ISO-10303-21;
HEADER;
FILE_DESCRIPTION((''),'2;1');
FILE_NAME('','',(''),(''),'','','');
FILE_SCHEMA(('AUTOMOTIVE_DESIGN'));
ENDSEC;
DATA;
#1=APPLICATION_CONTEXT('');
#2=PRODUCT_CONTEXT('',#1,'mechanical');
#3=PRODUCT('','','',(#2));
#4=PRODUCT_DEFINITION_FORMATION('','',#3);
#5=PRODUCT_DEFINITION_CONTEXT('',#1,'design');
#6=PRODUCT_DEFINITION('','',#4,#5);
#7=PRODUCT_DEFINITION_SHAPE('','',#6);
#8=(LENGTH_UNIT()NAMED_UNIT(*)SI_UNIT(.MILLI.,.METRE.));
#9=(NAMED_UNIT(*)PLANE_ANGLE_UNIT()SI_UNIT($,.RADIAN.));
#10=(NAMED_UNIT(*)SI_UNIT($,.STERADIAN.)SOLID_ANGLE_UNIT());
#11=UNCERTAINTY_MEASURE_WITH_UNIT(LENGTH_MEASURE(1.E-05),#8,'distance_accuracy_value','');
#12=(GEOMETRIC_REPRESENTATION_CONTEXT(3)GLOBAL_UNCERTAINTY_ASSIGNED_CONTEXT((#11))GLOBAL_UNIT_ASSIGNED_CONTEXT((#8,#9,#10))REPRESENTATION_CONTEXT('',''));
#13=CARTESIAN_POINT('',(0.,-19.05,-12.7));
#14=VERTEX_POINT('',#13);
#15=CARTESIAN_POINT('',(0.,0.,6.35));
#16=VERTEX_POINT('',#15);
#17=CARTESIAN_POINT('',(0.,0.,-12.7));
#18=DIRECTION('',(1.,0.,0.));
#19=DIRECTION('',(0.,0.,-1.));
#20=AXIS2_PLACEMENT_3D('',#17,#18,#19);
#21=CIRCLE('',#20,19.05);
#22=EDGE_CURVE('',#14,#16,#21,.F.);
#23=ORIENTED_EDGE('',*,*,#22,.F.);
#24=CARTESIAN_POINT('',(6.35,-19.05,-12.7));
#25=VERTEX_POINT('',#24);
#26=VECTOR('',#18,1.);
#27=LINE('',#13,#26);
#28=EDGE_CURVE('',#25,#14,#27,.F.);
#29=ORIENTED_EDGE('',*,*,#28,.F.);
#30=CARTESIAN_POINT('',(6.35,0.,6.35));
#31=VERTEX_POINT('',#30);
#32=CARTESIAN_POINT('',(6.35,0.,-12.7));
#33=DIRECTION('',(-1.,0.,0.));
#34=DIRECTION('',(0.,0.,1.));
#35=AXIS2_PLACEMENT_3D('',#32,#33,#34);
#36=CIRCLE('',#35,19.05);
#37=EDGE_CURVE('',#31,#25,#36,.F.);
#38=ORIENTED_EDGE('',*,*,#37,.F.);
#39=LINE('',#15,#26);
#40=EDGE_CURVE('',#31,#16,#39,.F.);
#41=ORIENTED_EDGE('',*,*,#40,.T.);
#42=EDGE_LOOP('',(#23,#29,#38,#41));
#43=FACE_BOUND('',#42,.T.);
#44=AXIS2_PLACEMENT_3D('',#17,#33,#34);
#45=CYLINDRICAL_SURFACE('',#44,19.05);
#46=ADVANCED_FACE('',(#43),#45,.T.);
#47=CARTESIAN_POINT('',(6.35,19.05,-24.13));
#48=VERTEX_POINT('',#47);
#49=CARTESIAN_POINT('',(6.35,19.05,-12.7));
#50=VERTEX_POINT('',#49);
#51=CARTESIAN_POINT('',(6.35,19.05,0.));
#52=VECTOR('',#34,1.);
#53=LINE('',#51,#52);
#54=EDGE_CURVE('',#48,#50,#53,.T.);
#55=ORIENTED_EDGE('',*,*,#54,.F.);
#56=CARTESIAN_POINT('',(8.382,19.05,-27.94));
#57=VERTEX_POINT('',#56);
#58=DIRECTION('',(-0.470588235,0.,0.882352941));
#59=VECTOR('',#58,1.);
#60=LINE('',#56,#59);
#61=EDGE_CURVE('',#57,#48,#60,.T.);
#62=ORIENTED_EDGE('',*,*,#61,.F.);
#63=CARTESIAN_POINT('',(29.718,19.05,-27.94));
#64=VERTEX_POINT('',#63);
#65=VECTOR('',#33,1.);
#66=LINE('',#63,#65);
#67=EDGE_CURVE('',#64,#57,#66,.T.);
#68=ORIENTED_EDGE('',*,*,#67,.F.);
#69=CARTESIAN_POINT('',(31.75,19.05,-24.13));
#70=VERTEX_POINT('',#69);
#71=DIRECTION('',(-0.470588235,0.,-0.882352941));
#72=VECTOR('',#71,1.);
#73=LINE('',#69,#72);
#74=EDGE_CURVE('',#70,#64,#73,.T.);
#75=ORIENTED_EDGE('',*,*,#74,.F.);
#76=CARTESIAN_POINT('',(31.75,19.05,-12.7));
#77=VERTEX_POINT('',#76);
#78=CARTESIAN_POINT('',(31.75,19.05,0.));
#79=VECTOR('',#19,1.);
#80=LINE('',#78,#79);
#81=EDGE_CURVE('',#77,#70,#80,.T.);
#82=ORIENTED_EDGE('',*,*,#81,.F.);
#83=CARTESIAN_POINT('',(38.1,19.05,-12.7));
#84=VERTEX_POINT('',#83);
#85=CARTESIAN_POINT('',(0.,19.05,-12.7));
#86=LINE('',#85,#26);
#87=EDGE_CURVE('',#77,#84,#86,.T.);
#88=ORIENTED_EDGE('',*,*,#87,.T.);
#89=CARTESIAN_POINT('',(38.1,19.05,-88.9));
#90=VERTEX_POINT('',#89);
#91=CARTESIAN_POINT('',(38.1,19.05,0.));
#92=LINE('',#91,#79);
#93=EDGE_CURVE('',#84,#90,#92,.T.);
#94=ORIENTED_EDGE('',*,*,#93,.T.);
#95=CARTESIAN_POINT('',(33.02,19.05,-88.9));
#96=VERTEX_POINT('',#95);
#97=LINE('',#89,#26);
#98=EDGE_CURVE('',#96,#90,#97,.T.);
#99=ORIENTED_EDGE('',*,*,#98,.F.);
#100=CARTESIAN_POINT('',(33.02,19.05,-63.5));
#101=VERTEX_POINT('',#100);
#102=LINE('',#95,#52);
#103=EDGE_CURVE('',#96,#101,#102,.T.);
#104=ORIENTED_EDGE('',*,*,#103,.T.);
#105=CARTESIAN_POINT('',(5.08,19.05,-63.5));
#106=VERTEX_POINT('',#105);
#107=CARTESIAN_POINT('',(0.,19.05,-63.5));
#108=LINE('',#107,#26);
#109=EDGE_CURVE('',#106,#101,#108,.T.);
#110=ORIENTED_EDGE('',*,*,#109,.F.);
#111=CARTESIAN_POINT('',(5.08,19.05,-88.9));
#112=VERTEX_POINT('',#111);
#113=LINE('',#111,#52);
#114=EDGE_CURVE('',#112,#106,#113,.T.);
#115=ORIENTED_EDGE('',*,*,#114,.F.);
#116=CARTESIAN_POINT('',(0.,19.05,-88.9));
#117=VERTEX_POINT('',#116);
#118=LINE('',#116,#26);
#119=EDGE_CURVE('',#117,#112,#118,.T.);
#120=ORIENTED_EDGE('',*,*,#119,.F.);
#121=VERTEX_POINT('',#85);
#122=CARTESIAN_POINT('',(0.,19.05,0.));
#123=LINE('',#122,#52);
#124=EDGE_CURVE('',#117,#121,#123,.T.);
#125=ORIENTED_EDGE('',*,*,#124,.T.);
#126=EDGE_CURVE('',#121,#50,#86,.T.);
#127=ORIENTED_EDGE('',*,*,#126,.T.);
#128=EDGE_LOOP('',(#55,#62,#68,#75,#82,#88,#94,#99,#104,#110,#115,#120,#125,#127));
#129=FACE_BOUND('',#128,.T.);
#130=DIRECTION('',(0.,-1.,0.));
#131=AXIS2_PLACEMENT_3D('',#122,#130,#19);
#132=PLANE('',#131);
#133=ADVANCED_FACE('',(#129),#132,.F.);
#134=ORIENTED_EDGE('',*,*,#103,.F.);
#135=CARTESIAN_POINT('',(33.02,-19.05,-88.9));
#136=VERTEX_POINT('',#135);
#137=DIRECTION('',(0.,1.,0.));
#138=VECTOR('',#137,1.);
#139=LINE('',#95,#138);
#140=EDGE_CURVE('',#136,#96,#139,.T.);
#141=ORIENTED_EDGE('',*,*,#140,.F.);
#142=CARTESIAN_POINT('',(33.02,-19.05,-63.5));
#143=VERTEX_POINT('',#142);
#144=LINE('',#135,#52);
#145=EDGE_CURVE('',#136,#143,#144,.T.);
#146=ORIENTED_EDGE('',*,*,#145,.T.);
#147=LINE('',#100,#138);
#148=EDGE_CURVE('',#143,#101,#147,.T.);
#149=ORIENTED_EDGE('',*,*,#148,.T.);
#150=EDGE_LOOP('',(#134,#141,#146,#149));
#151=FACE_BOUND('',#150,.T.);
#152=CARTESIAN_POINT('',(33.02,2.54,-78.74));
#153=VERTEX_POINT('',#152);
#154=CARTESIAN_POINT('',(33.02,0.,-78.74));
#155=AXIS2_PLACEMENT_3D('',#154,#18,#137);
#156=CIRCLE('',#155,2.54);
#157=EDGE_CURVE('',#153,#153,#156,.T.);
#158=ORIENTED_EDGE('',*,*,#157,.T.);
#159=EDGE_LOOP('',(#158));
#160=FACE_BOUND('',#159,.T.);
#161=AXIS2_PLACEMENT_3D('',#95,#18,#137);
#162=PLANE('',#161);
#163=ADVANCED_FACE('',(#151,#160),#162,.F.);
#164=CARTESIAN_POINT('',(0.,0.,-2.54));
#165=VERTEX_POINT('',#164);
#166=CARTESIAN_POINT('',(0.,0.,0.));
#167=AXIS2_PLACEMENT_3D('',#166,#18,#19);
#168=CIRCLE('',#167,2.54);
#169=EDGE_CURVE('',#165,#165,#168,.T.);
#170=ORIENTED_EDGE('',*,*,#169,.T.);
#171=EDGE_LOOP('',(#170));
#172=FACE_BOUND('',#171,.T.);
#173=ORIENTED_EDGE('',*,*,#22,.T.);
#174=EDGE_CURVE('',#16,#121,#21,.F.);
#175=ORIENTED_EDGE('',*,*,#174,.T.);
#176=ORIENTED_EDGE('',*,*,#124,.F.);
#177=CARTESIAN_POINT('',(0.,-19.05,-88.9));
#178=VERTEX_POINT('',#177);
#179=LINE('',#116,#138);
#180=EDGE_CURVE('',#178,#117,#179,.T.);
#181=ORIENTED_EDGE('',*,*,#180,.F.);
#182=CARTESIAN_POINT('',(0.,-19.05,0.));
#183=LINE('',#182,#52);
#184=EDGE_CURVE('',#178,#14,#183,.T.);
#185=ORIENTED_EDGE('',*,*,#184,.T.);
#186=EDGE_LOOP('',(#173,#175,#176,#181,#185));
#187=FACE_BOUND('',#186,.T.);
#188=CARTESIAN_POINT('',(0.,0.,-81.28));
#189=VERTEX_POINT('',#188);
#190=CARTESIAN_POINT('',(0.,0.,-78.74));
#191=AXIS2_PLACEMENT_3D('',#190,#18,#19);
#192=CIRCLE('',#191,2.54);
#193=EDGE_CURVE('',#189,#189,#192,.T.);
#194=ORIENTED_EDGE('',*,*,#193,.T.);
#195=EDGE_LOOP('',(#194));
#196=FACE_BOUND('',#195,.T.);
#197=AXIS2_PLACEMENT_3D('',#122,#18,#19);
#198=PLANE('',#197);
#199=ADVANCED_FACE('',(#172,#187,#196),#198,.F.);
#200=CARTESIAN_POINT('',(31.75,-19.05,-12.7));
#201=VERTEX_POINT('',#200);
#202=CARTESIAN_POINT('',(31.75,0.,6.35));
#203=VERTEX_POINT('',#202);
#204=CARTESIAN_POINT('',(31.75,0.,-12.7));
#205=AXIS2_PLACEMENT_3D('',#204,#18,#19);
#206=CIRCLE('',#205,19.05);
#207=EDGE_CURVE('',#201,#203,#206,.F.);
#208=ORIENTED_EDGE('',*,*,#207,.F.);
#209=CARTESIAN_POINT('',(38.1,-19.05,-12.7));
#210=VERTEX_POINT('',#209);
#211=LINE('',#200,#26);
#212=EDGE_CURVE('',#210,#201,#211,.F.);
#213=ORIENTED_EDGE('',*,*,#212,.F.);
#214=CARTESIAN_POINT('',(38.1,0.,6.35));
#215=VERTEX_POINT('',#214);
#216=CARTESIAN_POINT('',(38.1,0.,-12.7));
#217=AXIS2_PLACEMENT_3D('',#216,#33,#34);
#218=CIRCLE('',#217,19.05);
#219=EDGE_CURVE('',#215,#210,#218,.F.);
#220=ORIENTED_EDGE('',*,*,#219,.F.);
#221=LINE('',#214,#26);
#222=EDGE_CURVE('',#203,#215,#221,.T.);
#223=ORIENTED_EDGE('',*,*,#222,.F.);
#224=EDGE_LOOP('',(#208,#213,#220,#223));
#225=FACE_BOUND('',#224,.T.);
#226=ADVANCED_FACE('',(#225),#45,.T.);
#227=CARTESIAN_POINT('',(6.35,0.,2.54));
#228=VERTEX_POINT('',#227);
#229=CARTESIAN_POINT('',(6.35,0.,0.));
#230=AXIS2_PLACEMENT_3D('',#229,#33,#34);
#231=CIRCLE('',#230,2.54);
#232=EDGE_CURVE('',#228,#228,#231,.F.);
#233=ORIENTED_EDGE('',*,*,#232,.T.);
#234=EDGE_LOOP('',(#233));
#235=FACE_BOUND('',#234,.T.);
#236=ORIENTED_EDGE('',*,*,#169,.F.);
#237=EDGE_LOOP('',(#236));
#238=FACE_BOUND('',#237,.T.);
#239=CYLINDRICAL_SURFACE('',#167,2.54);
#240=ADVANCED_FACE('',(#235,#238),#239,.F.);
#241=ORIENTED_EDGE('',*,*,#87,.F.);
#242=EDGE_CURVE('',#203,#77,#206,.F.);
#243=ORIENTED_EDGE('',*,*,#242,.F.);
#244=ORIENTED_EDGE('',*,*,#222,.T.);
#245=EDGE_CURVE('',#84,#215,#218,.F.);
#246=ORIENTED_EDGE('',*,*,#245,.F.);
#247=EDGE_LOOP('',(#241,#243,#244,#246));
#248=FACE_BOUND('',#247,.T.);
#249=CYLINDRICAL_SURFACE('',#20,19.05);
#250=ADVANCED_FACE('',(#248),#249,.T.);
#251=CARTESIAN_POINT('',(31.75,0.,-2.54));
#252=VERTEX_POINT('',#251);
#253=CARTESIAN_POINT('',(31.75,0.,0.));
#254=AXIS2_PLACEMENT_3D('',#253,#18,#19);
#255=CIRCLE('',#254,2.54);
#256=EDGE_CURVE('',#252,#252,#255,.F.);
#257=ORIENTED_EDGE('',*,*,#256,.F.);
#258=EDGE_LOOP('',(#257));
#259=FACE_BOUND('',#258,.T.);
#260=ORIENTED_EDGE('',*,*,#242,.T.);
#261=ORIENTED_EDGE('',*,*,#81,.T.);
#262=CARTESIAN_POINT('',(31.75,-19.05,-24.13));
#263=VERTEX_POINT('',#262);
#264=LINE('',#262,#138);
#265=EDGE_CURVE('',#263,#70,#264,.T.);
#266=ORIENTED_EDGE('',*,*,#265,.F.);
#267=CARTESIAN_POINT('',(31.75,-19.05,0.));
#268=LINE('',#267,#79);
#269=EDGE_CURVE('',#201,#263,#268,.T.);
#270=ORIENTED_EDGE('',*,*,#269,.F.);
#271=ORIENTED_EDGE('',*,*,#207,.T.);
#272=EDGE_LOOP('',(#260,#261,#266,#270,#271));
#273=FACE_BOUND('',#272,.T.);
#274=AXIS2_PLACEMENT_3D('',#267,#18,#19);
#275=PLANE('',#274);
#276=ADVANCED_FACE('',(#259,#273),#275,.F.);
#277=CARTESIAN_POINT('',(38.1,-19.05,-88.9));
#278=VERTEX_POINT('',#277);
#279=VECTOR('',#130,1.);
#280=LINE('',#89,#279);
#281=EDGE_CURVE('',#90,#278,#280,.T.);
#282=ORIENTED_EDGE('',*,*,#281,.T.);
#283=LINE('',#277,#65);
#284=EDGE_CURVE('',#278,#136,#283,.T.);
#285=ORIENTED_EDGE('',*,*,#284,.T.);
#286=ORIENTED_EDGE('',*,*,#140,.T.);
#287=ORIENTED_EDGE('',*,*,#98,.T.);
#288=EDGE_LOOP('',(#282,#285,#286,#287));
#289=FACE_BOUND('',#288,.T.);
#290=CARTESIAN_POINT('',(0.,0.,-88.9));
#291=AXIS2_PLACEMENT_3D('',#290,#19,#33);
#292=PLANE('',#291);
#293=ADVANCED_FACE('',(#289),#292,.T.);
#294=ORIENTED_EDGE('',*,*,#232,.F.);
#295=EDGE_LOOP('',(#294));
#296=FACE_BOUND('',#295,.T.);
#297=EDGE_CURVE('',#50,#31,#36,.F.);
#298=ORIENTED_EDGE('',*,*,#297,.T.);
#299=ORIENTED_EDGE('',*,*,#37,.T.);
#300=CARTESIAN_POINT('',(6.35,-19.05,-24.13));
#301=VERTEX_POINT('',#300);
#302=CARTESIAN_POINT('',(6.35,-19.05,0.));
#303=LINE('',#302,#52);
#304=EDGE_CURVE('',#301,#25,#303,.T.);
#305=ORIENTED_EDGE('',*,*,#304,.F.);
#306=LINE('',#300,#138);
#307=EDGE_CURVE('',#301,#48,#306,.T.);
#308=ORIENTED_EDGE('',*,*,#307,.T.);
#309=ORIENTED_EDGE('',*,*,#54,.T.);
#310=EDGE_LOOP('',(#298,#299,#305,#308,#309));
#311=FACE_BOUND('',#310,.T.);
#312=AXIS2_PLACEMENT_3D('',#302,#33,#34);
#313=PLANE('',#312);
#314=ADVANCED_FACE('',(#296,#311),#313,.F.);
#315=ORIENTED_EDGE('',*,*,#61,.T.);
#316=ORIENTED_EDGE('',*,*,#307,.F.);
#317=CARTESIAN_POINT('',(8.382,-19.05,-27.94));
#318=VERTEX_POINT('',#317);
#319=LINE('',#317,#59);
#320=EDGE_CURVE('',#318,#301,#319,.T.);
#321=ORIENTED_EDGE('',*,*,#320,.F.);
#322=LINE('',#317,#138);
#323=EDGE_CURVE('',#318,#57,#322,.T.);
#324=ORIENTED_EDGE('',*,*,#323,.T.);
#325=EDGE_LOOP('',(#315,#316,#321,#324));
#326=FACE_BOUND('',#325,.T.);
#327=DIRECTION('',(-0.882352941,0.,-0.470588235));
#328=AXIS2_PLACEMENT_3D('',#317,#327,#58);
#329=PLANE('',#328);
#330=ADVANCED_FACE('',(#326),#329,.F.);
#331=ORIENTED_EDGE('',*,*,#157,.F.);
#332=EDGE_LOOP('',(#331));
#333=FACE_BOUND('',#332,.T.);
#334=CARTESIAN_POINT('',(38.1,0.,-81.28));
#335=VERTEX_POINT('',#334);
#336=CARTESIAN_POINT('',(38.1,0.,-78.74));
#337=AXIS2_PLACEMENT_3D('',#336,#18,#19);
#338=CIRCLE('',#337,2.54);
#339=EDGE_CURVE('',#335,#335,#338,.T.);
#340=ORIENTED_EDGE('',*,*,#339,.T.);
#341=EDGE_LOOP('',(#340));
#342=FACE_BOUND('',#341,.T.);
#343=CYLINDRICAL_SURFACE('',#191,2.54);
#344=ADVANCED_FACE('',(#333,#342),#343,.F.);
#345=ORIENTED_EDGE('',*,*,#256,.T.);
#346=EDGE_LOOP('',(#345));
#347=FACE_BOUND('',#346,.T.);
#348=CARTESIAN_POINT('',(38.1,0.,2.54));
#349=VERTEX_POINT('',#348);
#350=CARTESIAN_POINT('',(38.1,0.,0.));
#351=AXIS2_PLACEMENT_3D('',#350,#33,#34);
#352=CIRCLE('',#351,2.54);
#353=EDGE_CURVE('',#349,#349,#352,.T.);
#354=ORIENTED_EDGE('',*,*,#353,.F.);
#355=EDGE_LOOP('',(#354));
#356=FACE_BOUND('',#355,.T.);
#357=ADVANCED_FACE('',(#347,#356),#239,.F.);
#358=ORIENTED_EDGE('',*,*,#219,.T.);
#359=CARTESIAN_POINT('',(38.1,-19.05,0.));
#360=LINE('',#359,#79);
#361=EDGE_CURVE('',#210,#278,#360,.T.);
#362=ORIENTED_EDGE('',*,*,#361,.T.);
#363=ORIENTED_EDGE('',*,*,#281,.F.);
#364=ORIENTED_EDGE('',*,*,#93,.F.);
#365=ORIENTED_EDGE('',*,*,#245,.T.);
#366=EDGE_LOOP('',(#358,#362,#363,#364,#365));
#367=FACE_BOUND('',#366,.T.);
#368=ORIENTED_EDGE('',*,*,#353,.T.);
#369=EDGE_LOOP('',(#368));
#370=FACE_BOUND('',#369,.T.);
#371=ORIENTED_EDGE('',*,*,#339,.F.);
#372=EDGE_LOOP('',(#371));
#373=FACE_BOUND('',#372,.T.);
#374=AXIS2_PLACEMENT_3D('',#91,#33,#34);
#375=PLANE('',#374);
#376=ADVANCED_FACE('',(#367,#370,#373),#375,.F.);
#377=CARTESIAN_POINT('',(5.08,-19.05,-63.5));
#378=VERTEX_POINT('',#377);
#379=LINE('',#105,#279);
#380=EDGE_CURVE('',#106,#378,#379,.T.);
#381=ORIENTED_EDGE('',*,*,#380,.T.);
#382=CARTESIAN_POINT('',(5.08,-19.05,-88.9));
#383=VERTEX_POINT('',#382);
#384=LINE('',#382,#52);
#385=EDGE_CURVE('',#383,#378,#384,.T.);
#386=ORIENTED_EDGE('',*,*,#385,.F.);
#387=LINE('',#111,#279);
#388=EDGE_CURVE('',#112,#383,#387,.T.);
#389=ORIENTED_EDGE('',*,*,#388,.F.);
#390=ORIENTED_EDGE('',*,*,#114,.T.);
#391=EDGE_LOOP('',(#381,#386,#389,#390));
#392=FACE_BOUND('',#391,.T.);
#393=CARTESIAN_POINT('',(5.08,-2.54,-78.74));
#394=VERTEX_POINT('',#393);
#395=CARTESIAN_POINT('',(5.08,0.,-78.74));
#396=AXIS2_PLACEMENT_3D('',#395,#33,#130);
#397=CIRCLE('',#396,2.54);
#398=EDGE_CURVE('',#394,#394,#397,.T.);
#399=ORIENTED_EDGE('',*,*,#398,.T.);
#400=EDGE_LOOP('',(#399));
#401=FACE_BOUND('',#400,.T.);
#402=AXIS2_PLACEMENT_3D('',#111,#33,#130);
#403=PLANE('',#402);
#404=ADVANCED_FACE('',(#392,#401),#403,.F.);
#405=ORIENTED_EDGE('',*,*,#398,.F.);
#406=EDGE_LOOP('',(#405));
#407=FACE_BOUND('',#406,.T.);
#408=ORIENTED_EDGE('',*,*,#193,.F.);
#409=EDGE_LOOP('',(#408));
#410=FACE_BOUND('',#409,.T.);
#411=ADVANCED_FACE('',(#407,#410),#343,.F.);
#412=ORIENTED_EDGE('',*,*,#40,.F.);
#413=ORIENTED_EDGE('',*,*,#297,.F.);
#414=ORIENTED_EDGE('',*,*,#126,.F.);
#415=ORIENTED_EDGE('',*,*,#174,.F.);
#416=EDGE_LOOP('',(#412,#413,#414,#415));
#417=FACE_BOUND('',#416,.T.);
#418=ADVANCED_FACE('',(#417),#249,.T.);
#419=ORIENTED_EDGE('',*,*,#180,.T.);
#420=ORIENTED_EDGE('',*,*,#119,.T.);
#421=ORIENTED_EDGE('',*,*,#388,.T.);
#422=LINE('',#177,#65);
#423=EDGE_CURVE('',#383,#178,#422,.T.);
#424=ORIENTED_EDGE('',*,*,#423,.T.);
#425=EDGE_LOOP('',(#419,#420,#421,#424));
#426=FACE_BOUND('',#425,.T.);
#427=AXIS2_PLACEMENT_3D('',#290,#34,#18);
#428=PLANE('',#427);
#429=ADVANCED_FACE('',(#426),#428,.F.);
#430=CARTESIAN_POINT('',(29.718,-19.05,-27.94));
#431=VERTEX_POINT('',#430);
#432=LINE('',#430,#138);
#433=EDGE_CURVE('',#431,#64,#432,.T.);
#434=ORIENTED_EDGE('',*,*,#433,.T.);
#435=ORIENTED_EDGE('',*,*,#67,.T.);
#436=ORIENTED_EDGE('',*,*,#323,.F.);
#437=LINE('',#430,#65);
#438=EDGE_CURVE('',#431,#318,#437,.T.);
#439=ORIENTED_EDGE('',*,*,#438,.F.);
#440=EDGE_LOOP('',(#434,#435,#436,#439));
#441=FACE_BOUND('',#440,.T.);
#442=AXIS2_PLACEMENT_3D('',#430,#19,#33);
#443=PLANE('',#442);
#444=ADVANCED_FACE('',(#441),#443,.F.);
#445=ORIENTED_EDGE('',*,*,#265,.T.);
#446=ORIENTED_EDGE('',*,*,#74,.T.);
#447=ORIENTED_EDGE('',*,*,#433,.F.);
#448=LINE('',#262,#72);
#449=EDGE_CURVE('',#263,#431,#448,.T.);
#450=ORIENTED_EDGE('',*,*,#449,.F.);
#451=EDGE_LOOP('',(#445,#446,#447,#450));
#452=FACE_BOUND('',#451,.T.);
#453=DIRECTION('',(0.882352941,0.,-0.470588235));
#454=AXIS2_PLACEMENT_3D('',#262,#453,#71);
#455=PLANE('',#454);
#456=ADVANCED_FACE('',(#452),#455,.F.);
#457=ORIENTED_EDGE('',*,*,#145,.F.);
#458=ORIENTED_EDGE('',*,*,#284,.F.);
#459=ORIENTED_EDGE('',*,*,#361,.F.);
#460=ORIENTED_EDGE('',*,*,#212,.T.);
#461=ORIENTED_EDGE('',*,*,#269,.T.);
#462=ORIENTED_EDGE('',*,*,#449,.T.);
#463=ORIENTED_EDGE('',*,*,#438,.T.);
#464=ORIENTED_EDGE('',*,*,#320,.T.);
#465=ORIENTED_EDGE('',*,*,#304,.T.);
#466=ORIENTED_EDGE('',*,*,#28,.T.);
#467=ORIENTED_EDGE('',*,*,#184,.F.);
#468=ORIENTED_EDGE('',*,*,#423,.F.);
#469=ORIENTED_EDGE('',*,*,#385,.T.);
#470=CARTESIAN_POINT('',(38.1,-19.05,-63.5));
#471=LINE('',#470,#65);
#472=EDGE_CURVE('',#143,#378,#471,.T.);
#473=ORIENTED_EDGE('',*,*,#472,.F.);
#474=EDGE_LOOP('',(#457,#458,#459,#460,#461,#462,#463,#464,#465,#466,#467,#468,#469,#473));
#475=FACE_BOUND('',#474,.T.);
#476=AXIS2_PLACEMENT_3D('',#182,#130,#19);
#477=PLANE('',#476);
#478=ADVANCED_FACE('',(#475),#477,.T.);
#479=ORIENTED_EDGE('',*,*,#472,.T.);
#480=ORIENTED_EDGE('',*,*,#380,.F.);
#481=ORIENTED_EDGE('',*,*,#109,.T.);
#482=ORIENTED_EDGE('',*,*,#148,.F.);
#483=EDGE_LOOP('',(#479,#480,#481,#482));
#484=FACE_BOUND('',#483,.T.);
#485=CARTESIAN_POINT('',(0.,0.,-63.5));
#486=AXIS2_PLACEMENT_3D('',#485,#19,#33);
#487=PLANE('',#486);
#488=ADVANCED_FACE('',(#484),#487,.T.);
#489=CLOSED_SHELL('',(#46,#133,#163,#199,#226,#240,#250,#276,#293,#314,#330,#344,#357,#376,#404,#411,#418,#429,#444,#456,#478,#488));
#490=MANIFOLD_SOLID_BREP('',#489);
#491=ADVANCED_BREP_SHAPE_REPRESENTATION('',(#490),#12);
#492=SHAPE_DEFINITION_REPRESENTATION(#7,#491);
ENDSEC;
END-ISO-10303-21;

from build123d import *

# Parameters (mm, degrees)
SKETCH1_W                  = 38.1
SKETCH1_H                  = 38.1
PRONG_HOLDERS_DEPTH        = 19.05
SKETCH5_R                  = 2.54
SCREW_HOLDER_DEPTH         = 58.15
GROOVE_CUT_OUT_DEPTH       = 58.15
SKETCH6_W                  = 38.1
SKETCH6_H                  = 31.75
OPENING_OF_THE_TOP_DEPTH   = 66.991135768
ROUNDING_OFF_HODER_EDGES_R = 19.05
SKETCH7_W                  = 38.1
SKETCH7_H                  = 38.1
ADJUSTABLE_LENGTH_DEPTH    = 25.4
SKETCH8_W                  = 5.08
SKETCH8_H                  = 38.1
BOSS_EXTRUDE3_DEPTH        = 25.4
SKETCH9_R                  = 2.54
CUT_EXTRUDE4_DEPTH         = 99.578509321


with BuildPart() as part:
    # Sketch1 → Prong holders (new, symmetric)
    with BuildSketch(Plane(origin=(0, 0, 0), x_dir=(1, 0, 0), z_dir=(0, 1, 0))):
        with Locations((19.05, 19.05)):
            Rectangle(SKETCH1_W, SKETCH1_H)
    prong_holders = extrude(amount=PRONG_HOLDERS_DEPTH, both=True)

    # Sketch5 → Screw holder (cut, through all)
    with BuildSketch(Plane(origin=(38.1, 0, 0), x_dir=(0, 0, -1), z_dir=(1, 0, 0))):
        Circle(SKETCH5_R)
    screw_holder = extrude(amount=-SCREW_HOLDER_DEPTH, mode=Mode.SUBTRACT)

    # Sketch4 → Groove cut out (cut, symmetric)
    with BuildSketch(Plane(origin=(0, 0, 0), x_dir=(1, 0, 0), z_dir=(0, 1, 0))):
        Polygon((31.75, 24.13), (29.718, 27.94), (8.382, 27.94), (6.35, 24.13), (6.35, 0), (31.75, 0), align=None)
    groove_cut_out = extrude(amount=GROOVE_CUT_OUT_DEPTH, both=True, mode=Mode.SUBTRACT)

    # Mirror2: Prong holders, Screw holder, Groove cut out across plane
    add(prong_holders.mirror(Plane(origin=(0, 19.05, 0), x_dir=(1, 0, 0), z_dir=(0, 0, -1))))
    add(screw_holder.mirror(Plane(origin=(0, 19.05, 0), x_dir=(1, 0, 0), z_dir=(0, 0, -1))), mode=Mode.SUBTRACT)
    add(groove_cut_out.mirror(Plane(origin=(0, 19.05, 0), x_dir=(1, 0, 0), z_dir=(0, 0, -1))), mode=Mode.SUBTRACT)

    # Sketch6 → Opening of the top (cut, through all)
    with BuildSketch(Plane.XZ.offset(19.05)):
        with Locations((19.05, 22.225)):
            Rectangle(SKETCH6_W, SKETCH6_H)
    extrude(amount=-OPENING_OF_THE_TOP_DEPTH, mode=Mode.SUBTRACT)

    # Rounding off hoder edges
    rounding_off_hoder_edges_edges = [part.edges().sort_by_distance(p)[0] for p in [
        (3.175, 19.05, 6.35),
        (3.175, -19.05, 6.35),
        (34.925, -19.05, 6.35),
        (34.925, 19.05, 6.35),
    ]]
    fillet(rounding_off_hoder_edges_edges, radius=ROUNDING_OFF_HODER_EDGES_R - 0.0001)  # a hair under: the kernel refuses the full size

    # Sketch7 → Adjustable length (add)
    with BuildSketch(Plane(origin=(0, 0, -38.1), x_dir=(-1, 0, 0), z_dir=(0, 0, -1))):
        with Locations((-19.05, 0)):
            Rectangle(SKETCH7_W, SKETCH7_H)
    extrude(amount=ADJUSTABLE_LENGTH_DEPTH)

    # Sketch8 → Boss-Extrude3 (add)
    with BuildSketch(Plane(origin=(0, 0, -63.5), x_dir=(-1, 0, 0), z_dir=(0, 0, -1))):
        with Locations((-35.56, 0)):
            Rectangle(SKETCH8_W, SKETCH8_H)
        with Locations((-2.54, 0)):
            Rectangle(SKETCH8_W, SKETCH8_H)
    extrude(amount=BOSS_EXTRUDE3_DEPTH)

    # Sketch9 → Cut-Extrude4 (cut, through all)
    with BuildSketch(Plane(origin=(38.1, 0, 0), x_dir=(0, 0, -1), z_dir=(1, 0, 0))):
        with Locations((78.74, 0)):
            Circle(SKETCH9_R)
    extrude(amount=-CUT_EXTRUDE4_DEPTH, mode=Mode.SUBTRACT)


solid = part.part
